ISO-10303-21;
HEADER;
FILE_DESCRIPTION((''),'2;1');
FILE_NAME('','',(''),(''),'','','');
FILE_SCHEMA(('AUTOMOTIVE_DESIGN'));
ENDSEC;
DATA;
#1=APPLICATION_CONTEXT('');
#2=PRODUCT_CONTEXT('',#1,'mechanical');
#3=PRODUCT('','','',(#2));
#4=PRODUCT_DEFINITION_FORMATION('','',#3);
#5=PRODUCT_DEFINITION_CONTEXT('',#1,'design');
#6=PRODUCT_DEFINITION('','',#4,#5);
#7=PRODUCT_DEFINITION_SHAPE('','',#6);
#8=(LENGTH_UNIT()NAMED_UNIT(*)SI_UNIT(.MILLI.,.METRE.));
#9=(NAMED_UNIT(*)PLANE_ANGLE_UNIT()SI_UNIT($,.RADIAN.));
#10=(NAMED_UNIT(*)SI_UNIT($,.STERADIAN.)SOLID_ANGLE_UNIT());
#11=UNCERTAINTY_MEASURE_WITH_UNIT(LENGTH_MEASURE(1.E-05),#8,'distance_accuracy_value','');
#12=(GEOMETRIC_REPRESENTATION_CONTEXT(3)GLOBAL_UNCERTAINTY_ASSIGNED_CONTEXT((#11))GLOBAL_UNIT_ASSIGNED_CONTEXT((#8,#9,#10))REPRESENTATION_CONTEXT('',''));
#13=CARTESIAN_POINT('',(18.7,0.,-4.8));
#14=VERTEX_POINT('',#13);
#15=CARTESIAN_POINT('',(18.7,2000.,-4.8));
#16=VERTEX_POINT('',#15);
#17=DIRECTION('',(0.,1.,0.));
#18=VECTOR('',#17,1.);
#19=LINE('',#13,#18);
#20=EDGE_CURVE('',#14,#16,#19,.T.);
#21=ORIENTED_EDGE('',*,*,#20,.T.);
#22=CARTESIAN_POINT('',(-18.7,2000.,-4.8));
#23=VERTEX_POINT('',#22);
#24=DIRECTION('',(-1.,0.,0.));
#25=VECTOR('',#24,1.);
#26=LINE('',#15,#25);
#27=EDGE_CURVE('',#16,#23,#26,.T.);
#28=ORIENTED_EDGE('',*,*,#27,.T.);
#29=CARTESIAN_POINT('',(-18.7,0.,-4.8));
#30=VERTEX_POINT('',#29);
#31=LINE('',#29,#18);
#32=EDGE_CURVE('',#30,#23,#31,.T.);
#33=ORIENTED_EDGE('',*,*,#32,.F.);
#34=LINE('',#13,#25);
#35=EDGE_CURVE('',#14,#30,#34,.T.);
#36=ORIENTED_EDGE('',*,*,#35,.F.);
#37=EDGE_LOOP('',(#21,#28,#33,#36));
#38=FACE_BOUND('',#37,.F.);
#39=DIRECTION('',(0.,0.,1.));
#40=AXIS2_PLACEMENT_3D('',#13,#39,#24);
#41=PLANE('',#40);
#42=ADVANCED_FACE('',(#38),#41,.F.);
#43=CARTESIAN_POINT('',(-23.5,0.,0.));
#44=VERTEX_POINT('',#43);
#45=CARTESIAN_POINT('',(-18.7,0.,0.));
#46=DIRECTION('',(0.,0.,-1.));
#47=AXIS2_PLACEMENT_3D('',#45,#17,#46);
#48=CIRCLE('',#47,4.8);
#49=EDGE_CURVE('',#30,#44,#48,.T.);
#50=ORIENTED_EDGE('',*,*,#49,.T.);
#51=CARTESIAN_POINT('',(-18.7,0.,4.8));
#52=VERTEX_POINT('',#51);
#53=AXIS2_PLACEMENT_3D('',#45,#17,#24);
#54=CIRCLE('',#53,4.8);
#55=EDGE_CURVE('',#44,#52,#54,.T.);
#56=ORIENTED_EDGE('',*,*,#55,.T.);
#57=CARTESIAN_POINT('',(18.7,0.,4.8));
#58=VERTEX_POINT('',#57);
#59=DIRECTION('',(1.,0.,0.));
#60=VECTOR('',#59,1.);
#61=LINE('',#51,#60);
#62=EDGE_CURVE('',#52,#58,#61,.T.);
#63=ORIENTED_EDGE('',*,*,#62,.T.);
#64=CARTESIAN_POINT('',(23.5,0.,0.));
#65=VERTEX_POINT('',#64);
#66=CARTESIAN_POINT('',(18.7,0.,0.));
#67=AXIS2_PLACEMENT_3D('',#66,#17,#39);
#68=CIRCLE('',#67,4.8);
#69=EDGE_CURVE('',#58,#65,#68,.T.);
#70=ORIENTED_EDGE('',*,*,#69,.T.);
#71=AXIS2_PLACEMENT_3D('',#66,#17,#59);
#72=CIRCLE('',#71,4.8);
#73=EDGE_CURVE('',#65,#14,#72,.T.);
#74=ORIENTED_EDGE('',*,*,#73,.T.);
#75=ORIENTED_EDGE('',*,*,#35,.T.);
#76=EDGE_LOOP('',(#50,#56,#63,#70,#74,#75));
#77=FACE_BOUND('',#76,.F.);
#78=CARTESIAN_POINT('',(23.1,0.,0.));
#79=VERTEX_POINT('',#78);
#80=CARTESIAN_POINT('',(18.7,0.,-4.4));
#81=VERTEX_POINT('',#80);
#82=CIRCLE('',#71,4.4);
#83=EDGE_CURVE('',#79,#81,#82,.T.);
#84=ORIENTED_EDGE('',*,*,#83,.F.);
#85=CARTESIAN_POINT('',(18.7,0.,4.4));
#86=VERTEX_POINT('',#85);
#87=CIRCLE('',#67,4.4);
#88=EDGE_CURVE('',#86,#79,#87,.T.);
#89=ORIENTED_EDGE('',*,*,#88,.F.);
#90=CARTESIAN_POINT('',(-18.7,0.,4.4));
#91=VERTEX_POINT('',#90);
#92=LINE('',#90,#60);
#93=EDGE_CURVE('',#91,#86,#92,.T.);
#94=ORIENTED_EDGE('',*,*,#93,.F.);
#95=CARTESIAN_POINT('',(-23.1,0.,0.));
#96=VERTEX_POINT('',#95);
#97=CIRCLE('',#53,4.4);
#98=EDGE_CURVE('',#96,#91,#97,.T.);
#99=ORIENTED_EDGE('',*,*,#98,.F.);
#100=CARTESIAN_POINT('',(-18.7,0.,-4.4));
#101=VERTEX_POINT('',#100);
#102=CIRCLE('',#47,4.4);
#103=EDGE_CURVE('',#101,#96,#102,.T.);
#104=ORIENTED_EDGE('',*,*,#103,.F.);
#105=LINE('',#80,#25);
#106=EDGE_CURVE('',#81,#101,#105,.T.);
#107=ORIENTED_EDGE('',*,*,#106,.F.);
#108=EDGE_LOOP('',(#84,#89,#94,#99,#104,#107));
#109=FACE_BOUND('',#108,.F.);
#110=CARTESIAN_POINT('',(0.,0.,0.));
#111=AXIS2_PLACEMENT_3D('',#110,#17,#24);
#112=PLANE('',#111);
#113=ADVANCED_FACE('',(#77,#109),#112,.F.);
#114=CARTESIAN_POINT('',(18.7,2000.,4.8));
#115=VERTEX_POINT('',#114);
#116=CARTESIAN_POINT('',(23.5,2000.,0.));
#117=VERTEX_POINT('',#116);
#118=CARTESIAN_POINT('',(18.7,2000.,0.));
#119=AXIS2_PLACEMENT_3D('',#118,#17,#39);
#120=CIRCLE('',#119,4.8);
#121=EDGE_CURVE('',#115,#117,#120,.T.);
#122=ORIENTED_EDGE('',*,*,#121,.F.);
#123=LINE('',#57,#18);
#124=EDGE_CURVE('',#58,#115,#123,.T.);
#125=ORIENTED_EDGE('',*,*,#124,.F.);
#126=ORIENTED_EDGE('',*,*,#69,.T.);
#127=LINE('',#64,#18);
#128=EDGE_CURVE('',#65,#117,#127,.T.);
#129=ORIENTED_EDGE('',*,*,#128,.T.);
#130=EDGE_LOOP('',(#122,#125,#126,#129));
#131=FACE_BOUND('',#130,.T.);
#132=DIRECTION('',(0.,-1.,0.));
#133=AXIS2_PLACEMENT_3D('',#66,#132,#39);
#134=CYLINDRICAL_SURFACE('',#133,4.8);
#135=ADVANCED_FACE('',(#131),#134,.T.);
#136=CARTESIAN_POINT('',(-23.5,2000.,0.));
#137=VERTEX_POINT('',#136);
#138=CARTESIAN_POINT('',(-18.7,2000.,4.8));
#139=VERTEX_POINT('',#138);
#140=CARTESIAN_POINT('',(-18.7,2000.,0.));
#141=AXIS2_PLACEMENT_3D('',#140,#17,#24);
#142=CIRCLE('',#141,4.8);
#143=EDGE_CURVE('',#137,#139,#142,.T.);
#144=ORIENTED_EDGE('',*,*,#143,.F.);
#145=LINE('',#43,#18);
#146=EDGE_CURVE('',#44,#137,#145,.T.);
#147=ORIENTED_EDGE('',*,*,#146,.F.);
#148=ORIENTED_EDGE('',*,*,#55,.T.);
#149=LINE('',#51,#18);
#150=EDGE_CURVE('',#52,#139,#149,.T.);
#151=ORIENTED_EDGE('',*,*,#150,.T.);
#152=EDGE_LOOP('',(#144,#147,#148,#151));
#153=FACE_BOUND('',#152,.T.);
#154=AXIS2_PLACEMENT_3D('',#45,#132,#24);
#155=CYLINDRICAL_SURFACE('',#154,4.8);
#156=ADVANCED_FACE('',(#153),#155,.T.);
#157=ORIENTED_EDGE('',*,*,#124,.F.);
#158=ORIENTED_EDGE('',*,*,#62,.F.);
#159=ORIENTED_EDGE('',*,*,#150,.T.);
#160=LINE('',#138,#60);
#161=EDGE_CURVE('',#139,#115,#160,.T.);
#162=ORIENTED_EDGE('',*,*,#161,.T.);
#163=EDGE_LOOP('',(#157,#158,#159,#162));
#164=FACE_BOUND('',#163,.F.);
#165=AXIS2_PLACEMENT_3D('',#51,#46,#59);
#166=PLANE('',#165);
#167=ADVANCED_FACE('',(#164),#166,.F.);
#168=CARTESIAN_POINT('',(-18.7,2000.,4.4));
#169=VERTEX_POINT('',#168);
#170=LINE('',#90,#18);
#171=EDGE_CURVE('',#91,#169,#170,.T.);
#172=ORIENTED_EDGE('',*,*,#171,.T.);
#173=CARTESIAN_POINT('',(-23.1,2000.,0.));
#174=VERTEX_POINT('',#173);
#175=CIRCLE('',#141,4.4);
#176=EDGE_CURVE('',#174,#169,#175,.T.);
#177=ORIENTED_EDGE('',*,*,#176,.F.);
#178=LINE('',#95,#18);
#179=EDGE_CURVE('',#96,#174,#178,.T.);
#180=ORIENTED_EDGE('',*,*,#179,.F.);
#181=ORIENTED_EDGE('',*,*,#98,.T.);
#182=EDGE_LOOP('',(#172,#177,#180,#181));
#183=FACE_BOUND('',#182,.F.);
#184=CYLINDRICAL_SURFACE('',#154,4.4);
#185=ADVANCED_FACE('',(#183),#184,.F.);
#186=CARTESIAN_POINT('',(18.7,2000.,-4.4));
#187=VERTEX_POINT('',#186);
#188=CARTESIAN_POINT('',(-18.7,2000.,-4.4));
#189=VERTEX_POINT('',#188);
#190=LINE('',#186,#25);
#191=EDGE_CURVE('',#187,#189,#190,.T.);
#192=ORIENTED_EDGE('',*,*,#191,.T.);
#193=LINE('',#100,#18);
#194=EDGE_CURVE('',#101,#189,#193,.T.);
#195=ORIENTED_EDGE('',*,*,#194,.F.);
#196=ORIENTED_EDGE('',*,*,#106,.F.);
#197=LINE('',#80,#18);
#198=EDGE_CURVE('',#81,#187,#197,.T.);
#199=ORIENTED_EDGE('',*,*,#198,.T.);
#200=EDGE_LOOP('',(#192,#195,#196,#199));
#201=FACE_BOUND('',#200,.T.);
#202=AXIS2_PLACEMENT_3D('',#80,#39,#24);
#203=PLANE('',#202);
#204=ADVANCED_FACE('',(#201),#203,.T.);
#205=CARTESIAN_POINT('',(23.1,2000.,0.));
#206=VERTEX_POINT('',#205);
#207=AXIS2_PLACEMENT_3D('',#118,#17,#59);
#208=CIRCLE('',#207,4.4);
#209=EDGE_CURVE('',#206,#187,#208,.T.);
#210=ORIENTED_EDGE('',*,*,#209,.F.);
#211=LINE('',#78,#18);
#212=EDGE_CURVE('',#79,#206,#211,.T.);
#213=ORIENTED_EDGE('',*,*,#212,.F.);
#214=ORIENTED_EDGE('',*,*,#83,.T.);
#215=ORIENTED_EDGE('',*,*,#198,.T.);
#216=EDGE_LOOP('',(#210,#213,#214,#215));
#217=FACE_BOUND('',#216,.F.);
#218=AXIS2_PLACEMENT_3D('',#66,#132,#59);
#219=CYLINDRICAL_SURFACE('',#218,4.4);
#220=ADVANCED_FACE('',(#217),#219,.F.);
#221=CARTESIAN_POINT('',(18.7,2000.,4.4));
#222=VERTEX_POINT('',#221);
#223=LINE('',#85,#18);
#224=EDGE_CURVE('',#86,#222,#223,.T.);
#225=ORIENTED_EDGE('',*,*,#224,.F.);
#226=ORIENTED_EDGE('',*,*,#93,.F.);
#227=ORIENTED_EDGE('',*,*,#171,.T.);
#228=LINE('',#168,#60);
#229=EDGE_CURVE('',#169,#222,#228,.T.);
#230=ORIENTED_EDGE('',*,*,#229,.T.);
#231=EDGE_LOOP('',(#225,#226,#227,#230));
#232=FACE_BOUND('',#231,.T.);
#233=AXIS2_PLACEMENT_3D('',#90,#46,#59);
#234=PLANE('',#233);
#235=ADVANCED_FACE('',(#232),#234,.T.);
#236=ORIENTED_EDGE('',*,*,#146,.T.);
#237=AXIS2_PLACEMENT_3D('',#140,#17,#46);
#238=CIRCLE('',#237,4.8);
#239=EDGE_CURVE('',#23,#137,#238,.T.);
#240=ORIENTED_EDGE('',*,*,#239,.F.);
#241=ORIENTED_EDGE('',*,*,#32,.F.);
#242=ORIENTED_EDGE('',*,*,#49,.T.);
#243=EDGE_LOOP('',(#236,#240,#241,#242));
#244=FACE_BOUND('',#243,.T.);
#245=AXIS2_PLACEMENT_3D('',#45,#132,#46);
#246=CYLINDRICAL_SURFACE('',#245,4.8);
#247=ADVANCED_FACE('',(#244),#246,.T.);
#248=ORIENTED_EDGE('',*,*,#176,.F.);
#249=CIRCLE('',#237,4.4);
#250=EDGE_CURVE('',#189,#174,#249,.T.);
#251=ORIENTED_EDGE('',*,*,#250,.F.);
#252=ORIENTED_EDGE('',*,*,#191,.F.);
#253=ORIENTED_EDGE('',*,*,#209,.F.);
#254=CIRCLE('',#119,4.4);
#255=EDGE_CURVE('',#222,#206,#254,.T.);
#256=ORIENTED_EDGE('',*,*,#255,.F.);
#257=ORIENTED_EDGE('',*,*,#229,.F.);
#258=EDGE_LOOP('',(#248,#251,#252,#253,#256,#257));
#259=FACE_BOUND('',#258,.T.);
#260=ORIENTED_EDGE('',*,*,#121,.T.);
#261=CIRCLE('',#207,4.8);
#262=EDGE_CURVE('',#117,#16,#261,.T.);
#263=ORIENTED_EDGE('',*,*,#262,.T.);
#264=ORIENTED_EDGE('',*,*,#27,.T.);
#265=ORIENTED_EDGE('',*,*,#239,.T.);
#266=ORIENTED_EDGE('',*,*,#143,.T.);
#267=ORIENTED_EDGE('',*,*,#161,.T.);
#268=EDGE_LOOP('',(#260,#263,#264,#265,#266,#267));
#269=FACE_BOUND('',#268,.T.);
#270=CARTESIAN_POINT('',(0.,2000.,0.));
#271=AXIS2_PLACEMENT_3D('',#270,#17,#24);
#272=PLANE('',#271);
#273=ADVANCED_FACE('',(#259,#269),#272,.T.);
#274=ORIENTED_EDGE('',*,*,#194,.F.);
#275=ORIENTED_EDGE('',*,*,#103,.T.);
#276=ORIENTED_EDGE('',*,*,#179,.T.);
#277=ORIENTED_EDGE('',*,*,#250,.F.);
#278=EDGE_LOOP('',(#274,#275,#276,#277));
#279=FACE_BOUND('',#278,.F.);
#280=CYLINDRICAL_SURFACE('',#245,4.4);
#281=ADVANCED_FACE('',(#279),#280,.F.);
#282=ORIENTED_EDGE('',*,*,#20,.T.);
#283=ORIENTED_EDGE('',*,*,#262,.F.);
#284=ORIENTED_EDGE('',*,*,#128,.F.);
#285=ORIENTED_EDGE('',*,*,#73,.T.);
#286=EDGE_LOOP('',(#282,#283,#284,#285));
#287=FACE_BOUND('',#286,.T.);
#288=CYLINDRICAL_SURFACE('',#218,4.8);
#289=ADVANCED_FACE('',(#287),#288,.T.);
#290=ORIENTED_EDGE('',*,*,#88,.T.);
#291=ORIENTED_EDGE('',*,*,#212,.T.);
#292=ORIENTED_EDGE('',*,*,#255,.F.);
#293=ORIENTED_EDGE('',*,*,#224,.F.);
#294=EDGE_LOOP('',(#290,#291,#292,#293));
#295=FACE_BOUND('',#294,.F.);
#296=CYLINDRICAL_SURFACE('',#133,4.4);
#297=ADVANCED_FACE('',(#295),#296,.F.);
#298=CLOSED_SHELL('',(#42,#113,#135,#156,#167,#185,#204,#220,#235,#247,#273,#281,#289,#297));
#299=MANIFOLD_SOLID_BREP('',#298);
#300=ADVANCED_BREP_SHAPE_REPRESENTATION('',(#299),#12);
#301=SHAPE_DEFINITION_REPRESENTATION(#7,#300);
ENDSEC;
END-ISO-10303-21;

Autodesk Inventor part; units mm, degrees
ref_plane "YZ Plane" through (0, 0, 0) normal (1, 0, 0) x (0, 1, 0)
ref_plane "XZ Plane" through (0, 0, 0) normal (0, 1, 0) x (-1, 0, 0)
ref_plane "XY Plane" through (0, 0, 0) normal (0, 0, 1) x (1, 0, 0)
sketch "Эскиз1" plane through (0, 0, 0) normal (0, 1, 0) x (-1, 0, 0)
  line L0 (18.7, 4.8) -> (-18.7, 4.8)
  line L1 (-23.5, 0) -> (-23.5, 0)
  line L2 (-18.7, -4.8) -> (18.7, -4.8)
  line L3 (23.5, 0) -> (23.5, 0)
  arc A0 (23.5, 0) -> (18.7, 4.8) centre (18.7, 0) ccw
  arc A1 (18.7, -4.8) -> (23.5, 0) centre (18.7, 0) ccw
  arc A2 (-18.7, 4.8) -> (-23.5, 0) centre (-18.7, 0) ccw
  arc A3 (-23.5, 0) -> (-18.7, -4.8) centre (-18.7, 0) ccw
  line L4 (18.7, 4.4) -> (-18.7, 4.4)
  line L5 (-23.1, 0) -> (-23.1, 0)
  line L6 (-18.7, -4.4) -> (18.7, -4.4)
  line L7 (23.1, 0) -> (23.1, 0)
  arc A4 (23.1, 0) -> (18.7, 4.4) centre (18.7, 0) ccw
  arc A5 (18.7, -4.4) -> (23.1, 0) centre (18.7, 0) ccw
  arc A6 (-23.1, 0) -> (-18.7, -4.4) centre (-18.7, 0) ccw
  arc A7 (-18.7, 4.4) -> (-23.1, 0) centre (-18.7, 0) ccw
  point P0 (0, 0)
  dimension "d0" = 4.8
  dimension "d1" = 4.8
  dimension "d2" = 47
  dimension "d3" = 23.5
  dimension "d4" = 4.8
  dimension "d5" = 4.4
  dimension "d6" = 4.4
  dimension "d7" = 23.1
  dimension "d8" = 23.1
  dimension "d9" = 4.4
extrude "Выдавливание1" add sketch "Эскиз1" along normal blind 2000
properties part number "isolation"
